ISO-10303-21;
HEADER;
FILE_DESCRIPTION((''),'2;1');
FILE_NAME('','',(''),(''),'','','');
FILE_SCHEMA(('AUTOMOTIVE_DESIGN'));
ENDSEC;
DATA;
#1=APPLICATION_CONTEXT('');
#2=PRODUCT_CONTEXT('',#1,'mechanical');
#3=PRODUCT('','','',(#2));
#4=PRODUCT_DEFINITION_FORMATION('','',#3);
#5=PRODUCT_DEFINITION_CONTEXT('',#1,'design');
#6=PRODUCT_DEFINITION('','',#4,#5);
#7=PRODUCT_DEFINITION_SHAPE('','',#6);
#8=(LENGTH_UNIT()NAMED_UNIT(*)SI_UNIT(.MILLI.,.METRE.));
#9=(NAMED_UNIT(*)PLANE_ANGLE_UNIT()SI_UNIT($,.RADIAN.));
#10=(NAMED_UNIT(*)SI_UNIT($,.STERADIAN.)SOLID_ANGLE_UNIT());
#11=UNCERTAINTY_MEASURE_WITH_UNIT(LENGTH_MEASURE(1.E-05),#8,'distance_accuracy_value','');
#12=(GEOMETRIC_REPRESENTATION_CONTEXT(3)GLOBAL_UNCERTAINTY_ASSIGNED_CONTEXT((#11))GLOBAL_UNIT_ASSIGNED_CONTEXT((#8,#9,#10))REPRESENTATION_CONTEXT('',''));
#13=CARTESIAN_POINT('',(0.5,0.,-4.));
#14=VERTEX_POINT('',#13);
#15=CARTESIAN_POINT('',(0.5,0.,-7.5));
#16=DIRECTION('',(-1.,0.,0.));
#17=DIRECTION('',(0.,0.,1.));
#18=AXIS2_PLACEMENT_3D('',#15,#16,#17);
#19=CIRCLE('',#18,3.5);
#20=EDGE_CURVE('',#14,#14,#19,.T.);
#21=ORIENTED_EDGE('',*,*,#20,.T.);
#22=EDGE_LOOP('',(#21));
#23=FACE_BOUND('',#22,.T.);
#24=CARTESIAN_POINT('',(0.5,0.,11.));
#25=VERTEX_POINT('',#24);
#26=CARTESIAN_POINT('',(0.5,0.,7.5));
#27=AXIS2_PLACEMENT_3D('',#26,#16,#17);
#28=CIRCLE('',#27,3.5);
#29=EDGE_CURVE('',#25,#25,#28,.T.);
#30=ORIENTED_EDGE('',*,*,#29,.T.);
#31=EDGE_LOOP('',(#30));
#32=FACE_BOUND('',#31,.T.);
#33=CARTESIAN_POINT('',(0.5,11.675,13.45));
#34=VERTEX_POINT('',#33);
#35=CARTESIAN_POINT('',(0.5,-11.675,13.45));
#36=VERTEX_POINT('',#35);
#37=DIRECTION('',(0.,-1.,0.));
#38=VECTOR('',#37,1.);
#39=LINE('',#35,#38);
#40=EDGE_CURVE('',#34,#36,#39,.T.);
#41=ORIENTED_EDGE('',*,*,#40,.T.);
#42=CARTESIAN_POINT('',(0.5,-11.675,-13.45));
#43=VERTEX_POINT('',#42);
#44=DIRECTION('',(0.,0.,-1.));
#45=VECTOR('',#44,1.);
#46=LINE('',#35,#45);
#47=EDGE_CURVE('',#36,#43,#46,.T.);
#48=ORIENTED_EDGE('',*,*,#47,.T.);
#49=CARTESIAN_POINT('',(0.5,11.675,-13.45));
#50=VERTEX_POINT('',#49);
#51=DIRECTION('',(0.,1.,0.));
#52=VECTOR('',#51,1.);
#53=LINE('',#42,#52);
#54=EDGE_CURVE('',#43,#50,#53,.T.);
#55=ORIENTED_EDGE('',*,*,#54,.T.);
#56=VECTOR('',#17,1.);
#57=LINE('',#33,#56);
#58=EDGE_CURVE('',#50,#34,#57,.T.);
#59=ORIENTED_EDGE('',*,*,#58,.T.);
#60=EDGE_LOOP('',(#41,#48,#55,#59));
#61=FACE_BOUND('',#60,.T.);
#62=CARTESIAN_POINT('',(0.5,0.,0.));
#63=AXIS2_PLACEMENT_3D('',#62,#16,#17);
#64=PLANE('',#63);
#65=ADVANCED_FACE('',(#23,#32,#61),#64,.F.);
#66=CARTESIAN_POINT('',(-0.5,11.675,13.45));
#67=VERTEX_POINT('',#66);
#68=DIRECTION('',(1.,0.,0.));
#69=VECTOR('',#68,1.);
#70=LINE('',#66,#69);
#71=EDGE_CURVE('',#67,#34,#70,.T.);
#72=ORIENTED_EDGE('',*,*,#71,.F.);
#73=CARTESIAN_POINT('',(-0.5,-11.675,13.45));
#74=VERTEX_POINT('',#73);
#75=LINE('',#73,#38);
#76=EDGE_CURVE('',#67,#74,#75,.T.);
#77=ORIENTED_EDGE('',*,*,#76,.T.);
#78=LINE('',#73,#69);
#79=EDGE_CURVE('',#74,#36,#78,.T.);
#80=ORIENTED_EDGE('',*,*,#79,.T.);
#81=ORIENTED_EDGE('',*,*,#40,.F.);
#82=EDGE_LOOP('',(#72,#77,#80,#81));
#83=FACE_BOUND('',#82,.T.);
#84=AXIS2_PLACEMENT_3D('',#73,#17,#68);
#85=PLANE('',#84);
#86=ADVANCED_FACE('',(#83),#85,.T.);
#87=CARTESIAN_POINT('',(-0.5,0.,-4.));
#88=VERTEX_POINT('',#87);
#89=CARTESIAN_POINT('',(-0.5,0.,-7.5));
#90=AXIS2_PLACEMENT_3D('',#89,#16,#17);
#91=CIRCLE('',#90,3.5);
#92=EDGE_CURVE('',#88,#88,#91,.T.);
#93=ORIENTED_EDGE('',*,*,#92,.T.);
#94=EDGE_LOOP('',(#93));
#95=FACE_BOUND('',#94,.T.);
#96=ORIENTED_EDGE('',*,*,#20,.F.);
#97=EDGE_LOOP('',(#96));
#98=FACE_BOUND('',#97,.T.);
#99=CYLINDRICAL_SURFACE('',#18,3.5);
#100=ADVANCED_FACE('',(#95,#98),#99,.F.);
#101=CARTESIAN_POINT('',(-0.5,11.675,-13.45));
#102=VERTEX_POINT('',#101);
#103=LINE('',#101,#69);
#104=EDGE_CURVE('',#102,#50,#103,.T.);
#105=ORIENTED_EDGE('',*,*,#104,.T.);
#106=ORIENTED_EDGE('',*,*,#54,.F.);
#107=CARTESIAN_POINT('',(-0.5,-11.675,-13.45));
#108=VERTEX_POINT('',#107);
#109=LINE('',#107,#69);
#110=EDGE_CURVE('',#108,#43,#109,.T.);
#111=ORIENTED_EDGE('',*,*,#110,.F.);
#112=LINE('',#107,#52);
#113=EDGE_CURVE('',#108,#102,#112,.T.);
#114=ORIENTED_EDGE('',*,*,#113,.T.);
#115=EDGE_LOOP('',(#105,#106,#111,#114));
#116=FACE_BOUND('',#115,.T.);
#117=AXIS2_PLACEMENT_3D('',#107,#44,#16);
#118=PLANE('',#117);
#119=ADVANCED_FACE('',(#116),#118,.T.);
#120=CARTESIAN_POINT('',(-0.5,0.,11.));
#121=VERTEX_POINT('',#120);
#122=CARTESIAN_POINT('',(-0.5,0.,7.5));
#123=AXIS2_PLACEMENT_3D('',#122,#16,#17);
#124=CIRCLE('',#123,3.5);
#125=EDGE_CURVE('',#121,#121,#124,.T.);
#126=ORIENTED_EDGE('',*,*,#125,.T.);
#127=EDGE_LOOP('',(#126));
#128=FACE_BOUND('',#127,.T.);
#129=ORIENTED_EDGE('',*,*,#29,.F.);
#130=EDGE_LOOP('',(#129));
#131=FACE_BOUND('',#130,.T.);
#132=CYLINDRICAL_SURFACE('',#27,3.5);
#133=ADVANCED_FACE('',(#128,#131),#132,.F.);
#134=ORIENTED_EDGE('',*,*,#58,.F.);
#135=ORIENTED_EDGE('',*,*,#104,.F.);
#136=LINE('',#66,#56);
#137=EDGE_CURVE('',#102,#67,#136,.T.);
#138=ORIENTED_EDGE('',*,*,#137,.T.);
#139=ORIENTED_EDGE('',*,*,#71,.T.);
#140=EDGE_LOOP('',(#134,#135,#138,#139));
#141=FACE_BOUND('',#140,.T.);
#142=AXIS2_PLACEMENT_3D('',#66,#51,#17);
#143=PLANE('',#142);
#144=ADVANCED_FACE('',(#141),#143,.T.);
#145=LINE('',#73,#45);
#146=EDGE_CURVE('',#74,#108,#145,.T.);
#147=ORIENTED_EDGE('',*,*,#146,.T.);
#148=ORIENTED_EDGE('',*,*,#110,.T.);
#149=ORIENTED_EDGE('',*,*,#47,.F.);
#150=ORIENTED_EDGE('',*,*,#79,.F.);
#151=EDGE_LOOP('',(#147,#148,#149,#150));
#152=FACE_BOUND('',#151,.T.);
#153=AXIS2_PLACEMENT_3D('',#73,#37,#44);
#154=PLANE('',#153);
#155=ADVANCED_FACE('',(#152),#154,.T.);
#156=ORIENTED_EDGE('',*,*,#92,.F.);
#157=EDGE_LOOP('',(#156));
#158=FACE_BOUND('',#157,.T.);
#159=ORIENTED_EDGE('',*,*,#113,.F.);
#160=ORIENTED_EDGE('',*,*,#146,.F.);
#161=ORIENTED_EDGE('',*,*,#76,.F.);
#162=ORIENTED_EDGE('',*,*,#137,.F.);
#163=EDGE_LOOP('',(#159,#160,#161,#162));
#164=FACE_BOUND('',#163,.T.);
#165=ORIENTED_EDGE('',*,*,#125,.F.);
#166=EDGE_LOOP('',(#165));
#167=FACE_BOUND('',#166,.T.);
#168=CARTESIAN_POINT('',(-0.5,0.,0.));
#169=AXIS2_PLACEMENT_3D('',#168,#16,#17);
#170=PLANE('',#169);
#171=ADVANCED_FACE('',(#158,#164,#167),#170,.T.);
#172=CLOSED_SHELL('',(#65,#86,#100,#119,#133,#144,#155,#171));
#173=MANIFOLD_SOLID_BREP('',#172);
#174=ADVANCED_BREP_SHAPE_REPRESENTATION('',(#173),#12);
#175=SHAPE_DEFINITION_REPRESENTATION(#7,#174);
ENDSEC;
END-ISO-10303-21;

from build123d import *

# Parameters (mm, degrees)
FLANGE_BASE1_START     = -0.5
FLANGE_BASE1_OUTLINE_W = 26.9
FLANGE_BASE1_OUTLINE_H = 23.35
FLANGE_BASE1_DEPTH     = 1
ESBO_O2_R              = 3.5
CORTE_EXTRUS_O1_DEPTH  = 1


# Read off the part's stored shape, not the designer's step: Flange-base1
with BuildPart() as part:
    # Flange-base1 outline → Flange-base1 (new body)
    with BuildSketch(Plane(origin=(0, 0, 0), x_dir=(0, 0, -1), z_dir=(1, 0, 0)).offset(FLANGE_BASE1_START)):
        Rectangle(FLANGE_BASE1_OUTLINE_W, FLANGE_BASE1_OUTLINE_H)
    extrude(amount=FLANGE_BASE1_DEPTH)

    # Esboço2 → Corte-extrusão1 (cut)
    with BuildSketch(Plane.ZY.offset(0.5)):
        with Locations((-7.5, 0)):
            Circle(ESBO_O2_R)
        with Locations((7.5, 0)):
            Circle(ESBO_O2_R)
    extrude(amount=-CORTE_EXTRUS_O1_DEPTH, mode=Mode.SUBTRACT)


solid = part.part
